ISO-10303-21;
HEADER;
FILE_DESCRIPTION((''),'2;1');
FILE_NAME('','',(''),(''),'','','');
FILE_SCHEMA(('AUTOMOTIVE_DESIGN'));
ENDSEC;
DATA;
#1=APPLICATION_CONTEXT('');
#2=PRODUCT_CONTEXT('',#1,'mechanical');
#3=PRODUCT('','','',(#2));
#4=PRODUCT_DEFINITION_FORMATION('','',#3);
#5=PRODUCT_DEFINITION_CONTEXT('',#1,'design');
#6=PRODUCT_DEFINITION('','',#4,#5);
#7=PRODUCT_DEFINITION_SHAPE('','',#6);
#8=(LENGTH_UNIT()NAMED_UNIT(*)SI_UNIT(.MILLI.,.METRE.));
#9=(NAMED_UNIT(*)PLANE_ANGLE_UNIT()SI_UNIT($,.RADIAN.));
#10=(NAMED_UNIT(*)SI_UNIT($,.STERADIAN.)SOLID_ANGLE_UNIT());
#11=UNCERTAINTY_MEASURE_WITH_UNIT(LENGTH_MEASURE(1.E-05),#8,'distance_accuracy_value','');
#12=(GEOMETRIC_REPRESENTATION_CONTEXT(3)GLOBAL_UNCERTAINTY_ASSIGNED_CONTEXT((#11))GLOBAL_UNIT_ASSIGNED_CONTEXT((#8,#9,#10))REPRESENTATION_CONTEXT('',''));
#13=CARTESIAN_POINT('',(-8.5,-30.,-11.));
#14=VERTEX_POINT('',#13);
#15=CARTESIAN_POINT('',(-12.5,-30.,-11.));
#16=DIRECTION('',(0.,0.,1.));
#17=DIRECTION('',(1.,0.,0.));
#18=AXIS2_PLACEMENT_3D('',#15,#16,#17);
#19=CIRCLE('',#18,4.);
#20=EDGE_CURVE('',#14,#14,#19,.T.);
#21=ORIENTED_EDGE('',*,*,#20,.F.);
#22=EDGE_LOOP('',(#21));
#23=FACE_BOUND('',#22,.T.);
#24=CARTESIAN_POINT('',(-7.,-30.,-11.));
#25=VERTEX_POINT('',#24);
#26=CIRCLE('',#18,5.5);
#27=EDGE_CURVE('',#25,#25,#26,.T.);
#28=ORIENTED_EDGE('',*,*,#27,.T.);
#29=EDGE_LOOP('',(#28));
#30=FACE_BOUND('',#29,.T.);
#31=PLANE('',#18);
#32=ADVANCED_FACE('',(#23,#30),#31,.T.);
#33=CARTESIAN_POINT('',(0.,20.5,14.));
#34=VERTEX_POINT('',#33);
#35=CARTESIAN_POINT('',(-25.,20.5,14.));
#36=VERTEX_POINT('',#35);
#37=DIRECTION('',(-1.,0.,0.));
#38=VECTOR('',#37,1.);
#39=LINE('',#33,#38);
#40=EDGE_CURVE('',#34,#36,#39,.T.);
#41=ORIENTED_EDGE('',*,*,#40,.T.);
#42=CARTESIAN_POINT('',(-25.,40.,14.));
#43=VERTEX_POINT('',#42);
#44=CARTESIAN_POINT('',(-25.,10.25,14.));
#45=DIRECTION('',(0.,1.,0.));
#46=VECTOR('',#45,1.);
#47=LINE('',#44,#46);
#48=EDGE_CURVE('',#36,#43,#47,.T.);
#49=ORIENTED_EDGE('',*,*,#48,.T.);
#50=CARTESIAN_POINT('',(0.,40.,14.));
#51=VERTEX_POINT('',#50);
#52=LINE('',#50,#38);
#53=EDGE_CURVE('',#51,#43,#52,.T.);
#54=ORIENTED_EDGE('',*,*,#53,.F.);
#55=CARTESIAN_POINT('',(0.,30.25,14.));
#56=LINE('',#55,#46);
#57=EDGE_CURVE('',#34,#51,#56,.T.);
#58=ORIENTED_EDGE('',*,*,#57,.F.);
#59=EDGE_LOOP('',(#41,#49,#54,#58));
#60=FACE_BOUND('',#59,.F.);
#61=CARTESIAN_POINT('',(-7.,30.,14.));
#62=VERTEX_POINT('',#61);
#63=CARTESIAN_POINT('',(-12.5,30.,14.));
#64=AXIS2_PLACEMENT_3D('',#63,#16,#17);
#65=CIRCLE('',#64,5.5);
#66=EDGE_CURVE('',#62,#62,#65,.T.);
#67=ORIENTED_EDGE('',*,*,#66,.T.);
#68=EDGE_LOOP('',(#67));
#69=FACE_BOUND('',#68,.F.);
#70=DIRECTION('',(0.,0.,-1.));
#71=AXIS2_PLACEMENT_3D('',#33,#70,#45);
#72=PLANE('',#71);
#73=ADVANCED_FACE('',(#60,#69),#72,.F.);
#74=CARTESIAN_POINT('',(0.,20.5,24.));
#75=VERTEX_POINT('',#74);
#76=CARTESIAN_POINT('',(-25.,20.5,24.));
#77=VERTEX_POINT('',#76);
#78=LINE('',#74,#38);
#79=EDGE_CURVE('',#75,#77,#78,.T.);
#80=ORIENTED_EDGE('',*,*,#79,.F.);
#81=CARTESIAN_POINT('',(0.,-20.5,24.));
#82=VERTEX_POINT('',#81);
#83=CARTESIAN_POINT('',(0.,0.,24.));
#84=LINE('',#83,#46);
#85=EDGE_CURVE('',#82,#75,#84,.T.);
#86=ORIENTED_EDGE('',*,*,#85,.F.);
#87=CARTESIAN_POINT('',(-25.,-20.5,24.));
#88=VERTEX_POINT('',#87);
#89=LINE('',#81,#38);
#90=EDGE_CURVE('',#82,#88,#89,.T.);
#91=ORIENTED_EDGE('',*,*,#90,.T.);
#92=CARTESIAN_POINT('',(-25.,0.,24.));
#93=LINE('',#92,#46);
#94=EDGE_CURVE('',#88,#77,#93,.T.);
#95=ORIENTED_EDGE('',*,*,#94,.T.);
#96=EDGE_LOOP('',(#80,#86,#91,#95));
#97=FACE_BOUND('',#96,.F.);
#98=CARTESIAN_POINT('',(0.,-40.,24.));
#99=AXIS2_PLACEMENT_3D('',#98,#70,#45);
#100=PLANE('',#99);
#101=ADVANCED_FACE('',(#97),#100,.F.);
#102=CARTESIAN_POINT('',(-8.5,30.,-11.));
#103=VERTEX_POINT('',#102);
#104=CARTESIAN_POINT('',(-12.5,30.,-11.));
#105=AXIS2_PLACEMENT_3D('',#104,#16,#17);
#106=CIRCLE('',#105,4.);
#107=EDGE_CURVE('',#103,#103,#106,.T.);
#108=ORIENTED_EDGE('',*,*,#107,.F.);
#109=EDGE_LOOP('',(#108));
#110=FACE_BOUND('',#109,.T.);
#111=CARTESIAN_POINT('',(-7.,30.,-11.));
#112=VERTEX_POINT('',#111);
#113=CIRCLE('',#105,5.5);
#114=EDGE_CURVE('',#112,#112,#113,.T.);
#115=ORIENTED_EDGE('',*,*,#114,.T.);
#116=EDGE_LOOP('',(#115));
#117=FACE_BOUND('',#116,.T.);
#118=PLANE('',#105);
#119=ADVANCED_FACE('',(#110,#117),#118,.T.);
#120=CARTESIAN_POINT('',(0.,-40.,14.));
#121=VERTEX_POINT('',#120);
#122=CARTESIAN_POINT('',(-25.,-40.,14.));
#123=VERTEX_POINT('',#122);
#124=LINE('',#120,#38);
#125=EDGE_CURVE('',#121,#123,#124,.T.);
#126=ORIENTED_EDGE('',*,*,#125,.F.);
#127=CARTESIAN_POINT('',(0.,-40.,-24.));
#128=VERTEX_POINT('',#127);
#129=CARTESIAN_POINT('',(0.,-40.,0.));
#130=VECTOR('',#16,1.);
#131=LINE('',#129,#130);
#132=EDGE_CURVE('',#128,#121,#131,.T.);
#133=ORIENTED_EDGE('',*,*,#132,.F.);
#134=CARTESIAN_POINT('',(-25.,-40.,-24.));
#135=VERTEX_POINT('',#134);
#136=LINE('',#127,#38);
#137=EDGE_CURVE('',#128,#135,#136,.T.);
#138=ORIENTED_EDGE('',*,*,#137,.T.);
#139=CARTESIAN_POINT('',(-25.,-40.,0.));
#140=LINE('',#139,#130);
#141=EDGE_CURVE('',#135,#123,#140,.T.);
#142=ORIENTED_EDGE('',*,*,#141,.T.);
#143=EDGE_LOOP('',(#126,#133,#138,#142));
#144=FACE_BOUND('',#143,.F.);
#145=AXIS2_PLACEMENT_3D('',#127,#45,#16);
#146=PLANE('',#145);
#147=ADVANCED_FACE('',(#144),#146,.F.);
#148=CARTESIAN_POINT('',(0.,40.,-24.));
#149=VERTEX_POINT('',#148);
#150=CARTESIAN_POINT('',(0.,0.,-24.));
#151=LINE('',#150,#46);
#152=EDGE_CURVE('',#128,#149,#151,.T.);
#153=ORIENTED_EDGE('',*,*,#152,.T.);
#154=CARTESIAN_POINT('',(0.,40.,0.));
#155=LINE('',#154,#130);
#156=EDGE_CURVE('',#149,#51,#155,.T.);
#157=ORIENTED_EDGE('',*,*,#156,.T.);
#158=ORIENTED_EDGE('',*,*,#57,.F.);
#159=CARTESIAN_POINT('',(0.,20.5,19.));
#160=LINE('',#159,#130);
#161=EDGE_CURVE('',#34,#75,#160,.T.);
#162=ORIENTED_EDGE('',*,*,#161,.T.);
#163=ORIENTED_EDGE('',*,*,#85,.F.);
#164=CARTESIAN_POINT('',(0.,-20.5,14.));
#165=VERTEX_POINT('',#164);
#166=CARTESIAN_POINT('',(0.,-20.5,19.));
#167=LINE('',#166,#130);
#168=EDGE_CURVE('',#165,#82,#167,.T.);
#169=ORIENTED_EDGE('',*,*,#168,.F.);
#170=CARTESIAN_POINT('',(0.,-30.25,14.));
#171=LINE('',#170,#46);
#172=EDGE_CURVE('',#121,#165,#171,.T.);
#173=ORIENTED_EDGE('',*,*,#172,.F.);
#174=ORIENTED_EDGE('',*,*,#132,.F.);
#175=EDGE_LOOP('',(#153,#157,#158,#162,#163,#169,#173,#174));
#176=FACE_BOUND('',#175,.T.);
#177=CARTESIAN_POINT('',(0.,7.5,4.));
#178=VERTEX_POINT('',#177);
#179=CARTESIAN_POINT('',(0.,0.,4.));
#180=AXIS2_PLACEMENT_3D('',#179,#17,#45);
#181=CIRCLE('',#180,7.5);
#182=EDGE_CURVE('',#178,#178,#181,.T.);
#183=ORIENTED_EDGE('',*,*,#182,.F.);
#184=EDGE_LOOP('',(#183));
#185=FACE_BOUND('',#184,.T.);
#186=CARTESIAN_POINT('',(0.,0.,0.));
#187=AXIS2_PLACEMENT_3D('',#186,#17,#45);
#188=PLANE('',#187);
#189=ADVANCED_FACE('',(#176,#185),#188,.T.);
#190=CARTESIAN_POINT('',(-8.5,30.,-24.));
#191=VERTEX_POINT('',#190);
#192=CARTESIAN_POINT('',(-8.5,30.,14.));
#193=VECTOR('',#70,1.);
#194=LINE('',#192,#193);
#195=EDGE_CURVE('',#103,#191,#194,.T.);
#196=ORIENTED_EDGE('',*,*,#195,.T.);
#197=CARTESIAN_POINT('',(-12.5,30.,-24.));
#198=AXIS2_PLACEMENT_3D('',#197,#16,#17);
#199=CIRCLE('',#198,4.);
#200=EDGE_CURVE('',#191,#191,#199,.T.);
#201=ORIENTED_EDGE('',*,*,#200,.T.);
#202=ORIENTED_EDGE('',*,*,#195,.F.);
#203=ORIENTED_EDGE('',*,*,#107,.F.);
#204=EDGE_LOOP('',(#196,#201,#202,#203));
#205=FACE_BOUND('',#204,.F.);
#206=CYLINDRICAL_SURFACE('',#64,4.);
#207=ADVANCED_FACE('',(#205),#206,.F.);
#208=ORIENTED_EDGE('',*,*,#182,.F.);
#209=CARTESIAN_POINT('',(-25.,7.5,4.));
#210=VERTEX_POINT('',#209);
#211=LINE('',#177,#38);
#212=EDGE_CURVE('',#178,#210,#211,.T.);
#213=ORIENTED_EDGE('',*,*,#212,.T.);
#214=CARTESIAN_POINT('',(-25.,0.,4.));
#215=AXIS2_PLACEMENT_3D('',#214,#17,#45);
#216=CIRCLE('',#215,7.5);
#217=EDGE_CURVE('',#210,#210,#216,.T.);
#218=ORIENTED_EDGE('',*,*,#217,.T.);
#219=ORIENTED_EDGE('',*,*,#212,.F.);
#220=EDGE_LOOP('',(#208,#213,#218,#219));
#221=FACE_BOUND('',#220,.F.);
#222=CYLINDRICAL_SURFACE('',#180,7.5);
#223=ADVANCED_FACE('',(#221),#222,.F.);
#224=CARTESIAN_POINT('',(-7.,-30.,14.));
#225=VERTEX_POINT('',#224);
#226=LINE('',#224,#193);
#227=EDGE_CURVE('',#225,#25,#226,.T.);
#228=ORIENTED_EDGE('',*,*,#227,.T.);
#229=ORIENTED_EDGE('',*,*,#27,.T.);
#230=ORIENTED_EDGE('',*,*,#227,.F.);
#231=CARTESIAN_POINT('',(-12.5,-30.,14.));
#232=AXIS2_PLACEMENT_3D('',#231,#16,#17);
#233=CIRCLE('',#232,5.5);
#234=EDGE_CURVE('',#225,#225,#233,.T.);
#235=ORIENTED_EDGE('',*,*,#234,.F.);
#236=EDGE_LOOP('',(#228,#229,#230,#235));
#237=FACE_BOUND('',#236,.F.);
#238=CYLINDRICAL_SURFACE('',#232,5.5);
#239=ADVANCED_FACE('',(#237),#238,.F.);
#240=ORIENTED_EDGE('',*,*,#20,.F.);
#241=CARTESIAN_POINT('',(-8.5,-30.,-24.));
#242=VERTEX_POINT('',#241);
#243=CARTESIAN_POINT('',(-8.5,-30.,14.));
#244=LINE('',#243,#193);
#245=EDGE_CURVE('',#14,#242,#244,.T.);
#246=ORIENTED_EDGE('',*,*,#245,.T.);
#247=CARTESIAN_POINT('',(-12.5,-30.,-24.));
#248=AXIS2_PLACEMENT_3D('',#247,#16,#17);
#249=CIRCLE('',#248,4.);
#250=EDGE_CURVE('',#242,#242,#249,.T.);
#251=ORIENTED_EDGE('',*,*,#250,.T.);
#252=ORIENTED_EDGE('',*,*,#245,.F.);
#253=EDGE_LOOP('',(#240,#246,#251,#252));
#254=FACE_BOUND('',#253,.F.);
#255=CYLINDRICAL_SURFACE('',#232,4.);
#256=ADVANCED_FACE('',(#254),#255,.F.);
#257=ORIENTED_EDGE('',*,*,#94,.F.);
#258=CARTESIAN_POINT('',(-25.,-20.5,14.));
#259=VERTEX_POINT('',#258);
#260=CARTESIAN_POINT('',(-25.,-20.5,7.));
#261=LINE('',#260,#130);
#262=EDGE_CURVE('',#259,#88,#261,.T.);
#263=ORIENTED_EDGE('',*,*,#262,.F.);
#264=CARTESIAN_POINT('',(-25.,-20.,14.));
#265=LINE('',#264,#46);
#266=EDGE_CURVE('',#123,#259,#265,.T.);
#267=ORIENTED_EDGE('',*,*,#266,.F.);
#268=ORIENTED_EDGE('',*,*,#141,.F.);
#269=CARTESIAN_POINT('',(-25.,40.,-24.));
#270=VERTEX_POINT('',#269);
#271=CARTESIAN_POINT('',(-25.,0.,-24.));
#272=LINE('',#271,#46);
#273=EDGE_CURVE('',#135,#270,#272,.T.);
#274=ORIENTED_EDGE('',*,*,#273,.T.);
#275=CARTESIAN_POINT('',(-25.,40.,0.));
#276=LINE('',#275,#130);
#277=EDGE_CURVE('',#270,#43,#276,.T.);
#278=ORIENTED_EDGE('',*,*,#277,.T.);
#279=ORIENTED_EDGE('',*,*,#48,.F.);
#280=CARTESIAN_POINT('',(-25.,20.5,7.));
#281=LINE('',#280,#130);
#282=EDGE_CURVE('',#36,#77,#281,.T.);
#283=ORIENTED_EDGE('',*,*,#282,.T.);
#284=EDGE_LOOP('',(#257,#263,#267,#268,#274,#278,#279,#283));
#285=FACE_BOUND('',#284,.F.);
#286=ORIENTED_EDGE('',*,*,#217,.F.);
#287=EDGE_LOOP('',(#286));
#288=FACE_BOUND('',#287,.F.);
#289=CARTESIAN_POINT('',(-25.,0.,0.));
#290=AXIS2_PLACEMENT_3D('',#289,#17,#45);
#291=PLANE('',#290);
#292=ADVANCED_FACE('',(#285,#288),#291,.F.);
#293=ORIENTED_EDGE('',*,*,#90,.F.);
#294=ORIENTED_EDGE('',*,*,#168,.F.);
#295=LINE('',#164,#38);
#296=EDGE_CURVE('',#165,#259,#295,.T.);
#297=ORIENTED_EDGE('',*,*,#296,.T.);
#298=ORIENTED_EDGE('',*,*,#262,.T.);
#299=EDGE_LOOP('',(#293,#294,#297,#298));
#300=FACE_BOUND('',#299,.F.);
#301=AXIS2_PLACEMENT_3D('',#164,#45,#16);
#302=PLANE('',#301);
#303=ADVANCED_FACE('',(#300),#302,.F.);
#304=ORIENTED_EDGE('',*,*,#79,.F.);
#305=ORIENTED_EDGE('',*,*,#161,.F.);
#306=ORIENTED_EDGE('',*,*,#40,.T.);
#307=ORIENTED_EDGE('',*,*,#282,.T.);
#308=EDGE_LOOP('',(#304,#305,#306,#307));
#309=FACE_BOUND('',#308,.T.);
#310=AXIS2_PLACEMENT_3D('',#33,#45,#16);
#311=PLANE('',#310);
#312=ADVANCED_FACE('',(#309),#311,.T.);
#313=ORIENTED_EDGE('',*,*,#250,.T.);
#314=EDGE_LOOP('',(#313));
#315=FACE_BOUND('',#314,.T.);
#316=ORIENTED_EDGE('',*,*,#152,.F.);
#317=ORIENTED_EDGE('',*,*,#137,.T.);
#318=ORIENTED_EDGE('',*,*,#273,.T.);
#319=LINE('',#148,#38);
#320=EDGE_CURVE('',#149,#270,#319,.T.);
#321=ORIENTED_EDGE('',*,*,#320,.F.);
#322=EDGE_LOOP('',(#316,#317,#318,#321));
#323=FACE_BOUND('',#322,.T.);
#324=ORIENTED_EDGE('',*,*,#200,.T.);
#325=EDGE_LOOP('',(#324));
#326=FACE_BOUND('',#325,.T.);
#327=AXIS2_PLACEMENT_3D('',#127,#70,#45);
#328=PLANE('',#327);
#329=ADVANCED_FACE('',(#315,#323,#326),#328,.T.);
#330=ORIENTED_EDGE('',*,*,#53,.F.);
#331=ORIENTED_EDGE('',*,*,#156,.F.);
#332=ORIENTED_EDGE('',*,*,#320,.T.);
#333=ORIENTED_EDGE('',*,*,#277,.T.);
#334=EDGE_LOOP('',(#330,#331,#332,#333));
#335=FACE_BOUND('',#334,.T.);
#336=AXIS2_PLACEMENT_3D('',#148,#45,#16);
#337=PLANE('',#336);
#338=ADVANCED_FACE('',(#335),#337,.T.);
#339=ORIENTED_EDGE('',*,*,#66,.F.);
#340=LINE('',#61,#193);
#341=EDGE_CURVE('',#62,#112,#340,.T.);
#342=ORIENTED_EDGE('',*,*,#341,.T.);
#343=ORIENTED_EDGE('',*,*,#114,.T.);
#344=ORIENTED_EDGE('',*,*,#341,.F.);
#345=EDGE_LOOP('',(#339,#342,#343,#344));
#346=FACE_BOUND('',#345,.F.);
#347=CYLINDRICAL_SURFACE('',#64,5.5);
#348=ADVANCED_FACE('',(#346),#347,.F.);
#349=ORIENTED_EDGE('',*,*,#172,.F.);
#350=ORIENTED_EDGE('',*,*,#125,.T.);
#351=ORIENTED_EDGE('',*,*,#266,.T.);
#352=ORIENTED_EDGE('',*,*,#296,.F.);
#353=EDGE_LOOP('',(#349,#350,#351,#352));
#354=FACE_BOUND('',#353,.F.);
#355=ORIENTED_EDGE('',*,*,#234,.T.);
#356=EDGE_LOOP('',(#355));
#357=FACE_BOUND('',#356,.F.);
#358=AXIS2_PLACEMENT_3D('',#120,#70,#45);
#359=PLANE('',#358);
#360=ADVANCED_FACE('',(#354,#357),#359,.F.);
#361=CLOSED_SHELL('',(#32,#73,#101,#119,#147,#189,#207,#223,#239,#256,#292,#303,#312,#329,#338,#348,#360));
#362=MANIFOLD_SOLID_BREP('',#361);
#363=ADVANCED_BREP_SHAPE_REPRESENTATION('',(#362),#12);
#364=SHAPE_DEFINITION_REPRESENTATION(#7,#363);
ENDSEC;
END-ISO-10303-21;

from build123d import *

# Parameters (mm, degrees)
F0_W     = 80
F0_H     = 48
F1_DEPTH = 25
F2_W     = 19.5
F2_H     = 10
F3_DEPTH = 25.001
F4_R     = 7.5
F5_DEPTH = 25.001
F6_R     = 5.5
F6_R_2   = 4
F7_DEPTH = 25
F8_DEPTH = 38.001


with BuildPart() as f1:
    # F0 (on Right) → F1 (new body)
    with BuildSketch(Plane.YZ):
        Rectangle(F0_W, F0_H)
    extrude(amount=-F1_DEPTH)

    # F2 (on face) → F3 (cut, through all)
    with BuildSketch(Plane.YZ):
        with Locations((-30.25, 19)):
            Rectangle(F2_W, F2_H)
        with Locations((30.25, 19)):
            Rectangle(F2_W, F2_H)
    extrude(amount=-F3_DEPTH, mode=Mode.SUBTRACT)

    # F4 (on face) → F5 (cut, through all)
    with BuildSketch(Plane.YZ):
        with Locations((0, 4)):
            Circle(F4_R)
    extrude(amount=-F5_DEPTH, mode=Mode.SUBTRACT)

    # F6 (on face) → F7 (cut)
    with BuildSketch(Plane.XY.offset(14)):
        with Locations((-12.5, 30)):
            Circle(F6_R)
        with Locations((-12.5, 30)):
            Circle(F6_R_2, mode=Mode.SUBTRACT)
        with Locations((-12.5, -30)):
            Circle(F6_R)
        with Locations((-12.5, -30)):
            Circle(F6_R_2, mode=Mode.SUBTRACT)
    extrude(amount=-F7_DEPTH, mode=Mode.SUBTRACT)

    # F8 (cut, through all): faces of the model
    f8_faces = [f1.faces().sort_by_distance(p)[0] for p in [
        (-12.5, 30, 14),
        (-12.5, -30, 14),
    ]]
    extrude(f8_faces, amount=-F8_DEPTH, mode=Mode.SUBTRACT)


solid = f1.part
